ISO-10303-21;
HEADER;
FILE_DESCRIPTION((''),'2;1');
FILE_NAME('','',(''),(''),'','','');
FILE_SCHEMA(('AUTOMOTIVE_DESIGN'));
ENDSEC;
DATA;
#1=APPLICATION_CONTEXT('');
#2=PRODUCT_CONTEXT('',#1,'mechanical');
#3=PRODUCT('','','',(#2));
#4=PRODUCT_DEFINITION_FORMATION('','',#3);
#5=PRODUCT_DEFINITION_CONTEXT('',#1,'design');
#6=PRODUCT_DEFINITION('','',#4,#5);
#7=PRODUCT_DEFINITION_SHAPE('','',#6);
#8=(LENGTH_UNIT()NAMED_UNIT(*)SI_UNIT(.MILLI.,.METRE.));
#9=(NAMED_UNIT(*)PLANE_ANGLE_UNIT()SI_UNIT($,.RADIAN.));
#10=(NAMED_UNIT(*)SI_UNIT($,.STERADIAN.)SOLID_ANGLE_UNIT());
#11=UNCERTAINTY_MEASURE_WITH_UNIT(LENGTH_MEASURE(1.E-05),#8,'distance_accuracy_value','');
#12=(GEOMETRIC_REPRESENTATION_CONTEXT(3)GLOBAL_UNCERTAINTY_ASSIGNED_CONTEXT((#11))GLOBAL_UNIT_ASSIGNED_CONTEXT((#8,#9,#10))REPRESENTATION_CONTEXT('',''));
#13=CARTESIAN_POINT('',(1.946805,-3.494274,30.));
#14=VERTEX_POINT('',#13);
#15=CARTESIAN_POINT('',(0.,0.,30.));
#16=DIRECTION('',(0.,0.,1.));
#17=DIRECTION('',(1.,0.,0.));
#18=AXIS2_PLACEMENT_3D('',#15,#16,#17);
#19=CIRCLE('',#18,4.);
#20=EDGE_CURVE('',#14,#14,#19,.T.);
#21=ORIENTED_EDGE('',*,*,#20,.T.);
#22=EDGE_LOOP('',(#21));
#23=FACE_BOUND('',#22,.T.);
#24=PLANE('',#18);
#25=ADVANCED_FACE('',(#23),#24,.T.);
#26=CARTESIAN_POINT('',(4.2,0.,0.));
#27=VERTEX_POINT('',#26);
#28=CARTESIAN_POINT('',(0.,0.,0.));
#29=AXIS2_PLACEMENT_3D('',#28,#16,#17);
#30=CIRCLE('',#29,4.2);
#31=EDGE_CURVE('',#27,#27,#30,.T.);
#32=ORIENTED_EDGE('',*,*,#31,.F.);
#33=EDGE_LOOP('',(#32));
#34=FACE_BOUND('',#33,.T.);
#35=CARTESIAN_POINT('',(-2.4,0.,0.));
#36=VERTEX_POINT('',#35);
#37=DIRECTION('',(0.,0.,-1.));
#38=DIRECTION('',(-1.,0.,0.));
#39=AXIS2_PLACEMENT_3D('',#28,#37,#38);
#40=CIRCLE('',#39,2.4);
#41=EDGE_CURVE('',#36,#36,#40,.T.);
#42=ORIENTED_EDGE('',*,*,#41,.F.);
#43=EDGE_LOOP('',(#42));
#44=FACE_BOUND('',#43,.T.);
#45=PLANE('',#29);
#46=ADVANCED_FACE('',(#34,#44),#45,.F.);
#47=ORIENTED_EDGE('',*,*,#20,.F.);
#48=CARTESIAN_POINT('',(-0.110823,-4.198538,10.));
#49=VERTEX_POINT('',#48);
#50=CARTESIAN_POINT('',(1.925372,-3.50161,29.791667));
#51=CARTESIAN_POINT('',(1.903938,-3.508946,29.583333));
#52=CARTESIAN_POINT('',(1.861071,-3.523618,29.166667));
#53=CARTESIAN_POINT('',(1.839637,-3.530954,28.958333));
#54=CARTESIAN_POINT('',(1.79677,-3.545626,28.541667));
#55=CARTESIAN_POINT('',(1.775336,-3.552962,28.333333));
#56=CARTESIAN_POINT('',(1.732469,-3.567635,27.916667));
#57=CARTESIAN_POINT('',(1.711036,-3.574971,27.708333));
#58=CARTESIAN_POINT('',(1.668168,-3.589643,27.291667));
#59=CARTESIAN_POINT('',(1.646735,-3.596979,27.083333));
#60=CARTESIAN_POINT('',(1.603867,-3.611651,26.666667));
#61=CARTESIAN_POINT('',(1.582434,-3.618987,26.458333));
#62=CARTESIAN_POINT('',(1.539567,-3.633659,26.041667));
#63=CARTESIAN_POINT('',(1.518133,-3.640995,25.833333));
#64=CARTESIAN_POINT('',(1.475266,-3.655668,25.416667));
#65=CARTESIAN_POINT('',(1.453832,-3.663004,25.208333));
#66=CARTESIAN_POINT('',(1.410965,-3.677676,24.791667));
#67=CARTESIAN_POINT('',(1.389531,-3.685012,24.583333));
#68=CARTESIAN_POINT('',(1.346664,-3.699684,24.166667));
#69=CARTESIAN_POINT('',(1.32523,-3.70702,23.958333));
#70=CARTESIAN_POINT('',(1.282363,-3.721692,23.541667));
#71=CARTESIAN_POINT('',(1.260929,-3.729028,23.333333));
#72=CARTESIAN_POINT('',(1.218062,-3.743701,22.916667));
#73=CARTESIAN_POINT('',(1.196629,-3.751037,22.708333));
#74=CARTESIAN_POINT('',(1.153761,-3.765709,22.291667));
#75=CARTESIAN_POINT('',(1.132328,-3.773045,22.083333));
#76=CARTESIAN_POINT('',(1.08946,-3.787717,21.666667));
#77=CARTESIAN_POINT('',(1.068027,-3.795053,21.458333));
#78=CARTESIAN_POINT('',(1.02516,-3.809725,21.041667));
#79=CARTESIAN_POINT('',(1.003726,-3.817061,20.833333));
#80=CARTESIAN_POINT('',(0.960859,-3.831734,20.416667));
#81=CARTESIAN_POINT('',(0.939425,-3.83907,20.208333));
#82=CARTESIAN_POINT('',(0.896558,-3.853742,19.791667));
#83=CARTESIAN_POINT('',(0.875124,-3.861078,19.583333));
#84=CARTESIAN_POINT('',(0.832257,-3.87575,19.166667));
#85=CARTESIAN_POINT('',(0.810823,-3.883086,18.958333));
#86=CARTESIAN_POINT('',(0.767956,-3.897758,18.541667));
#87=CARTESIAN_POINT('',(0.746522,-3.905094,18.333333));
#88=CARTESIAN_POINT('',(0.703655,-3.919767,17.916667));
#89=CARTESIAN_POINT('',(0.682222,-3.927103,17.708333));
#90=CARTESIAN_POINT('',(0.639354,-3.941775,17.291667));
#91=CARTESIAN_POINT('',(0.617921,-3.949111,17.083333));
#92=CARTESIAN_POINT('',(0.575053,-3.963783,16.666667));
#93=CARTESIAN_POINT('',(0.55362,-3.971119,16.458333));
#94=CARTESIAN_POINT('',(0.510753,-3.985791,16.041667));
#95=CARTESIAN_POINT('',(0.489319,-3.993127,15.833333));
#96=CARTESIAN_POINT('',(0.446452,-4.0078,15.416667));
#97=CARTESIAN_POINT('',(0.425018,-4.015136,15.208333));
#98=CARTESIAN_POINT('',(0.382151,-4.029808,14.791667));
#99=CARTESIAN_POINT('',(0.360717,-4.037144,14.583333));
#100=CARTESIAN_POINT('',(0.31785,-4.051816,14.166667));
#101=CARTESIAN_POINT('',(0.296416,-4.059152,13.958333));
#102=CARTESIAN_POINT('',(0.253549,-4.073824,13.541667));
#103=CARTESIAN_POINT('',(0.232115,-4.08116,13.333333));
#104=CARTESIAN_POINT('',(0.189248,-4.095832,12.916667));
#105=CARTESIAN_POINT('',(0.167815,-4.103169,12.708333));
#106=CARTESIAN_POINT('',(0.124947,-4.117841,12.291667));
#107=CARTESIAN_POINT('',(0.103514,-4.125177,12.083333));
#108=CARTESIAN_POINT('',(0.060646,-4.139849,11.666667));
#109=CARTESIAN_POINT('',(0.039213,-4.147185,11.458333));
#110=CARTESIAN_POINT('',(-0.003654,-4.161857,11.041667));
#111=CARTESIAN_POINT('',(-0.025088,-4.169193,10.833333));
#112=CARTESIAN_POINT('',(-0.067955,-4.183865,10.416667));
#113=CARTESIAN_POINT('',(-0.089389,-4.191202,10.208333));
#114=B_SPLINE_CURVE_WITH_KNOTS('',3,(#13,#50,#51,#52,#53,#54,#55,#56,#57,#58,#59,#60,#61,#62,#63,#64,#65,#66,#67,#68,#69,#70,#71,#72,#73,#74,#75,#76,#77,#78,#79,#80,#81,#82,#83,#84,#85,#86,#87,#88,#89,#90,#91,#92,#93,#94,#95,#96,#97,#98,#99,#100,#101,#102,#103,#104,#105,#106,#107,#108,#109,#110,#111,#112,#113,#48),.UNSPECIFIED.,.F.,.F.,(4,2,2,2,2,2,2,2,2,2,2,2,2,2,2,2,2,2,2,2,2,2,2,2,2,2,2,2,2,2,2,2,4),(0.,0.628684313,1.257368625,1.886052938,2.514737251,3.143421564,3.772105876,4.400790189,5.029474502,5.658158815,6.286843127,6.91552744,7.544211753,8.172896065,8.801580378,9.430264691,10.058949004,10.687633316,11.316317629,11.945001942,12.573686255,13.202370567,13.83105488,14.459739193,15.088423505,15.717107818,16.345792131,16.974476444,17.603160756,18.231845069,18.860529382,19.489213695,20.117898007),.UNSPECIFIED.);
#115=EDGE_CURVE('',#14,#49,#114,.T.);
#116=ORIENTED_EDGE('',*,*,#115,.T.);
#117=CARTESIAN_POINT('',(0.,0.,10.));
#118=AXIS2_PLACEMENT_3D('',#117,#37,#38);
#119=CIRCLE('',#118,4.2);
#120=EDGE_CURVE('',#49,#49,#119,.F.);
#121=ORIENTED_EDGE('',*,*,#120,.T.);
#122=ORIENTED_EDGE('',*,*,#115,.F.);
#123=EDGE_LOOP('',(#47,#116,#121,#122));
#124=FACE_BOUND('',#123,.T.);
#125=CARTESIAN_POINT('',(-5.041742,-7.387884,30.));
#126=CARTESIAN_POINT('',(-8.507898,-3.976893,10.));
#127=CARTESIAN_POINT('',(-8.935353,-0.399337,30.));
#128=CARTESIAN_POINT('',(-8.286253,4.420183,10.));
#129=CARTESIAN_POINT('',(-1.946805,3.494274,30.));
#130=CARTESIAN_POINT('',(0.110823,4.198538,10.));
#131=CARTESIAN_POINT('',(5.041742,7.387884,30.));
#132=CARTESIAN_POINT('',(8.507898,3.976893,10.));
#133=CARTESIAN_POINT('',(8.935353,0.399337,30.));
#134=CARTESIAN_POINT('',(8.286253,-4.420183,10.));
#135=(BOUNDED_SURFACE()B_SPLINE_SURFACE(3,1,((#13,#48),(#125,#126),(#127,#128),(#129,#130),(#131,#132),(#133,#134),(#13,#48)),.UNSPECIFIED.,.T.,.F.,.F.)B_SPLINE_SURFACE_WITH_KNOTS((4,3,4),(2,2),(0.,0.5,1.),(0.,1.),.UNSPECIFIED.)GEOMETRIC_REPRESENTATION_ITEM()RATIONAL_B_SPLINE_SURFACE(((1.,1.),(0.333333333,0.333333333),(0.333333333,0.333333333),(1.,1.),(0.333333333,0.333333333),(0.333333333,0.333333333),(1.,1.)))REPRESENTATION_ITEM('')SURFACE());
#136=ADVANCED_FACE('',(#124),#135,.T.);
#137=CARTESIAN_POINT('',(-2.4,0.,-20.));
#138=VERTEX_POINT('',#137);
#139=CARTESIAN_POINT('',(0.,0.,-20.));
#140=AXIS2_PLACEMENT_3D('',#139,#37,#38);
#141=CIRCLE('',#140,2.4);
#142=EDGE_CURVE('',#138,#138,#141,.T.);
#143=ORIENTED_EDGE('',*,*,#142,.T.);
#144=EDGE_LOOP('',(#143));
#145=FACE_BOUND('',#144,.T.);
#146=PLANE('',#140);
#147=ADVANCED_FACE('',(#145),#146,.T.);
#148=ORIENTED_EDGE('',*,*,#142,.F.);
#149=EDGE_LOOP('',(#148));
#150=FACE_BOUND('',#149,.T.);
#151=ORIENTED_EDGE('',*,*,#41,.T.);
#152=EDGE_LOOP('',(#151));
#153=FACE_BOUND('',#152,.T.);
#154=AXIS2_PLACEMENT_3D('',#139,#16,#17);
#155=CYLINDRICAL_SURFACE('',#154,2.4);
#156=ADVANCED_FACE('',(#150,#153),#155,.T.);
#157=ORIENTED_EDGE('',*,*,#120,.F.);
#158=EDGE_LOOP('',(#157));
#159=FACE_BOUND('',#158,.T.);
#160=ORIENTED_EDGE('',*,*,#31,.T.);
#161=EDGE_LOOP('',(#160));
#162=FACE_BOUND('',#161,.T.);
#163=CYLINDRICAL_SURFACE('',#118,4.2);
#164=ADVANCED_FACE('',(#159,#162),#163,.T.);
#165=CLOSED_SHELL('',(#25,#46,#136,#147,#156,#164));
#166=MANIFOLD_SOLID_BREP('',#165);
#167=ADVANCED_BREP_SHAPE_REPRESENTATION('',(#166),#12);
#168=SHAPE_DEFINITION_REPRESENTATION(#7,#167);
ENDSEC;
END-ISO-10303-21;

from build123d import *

# Parameters (mm, degrees)
ESBO_O1_R                = 4.2
RESSALTO_EXTRUS_O1_DEPTH = 10
ESBO_O3_R                = 2.4
RESSALTO_EXTRUS_O2_DEPTH = 20


with BuildPart() as part:
    # Esboço1 → Ressalto-extrusão1 (new body)
    with BuildSketch(Plane.XY):
        Circle(ESBO_O1_R)
    extrude(amount=RESSALTO_EXTRUS_O1_DEPTH)

    # Loft1: read off the stored shape, not the designer's step
    # Loft1: loft between two sections, ruled curve by curve
    loft1_from = [
        Edge.make_bspline([(1.94680537, -3.494273723, 30), (-5.041742075, -7.387884464, 30), (-8.935352816, -0.399337018, 30), (-1.94680537, 3.494273723, 30), (5.041742075, 7.387884464, 30), (8.935352816, 0.399337018, 30), (1.94680537, -3.494273723, 30)], [0, 0, 0, 0, 0.5, 0.5, 0.5, 1, 1, 1, 1], 3, [1, 0.333333333, 0.333333333, 1, 0.333333333, 0.333333333, 1]),
    ]
    loft1_to = [
        Edge.make_bspline([(-0.110822525, -4.198537646, 10), (-8.507897818, -3.976892596, 10), (-8.286252768, 4.420182696, 10), (0.110822525, 4.198537646, 10), (8.507897818, 3.976892596, 10), (8.286252768, -4.420182696, 10), (-0.110822525, -4.198537646, 10)], [0, 0, 0, 0, 0.5, 0.5, 0.5, 1, 1, 1, 1], 3, [1, 0.333333333, 0.333333333, 1, 0.333333333, 0.333333333, 1]),
    ]
    loft1 = Solid(Shell([*[Face.make_surface_from_curves(loft1_from[k], loft1_to[k]) for k in range(1)], Face(Wire(loft1_from)), Face(Wire(loft1_to))]))
    add(loft1)

    # Esboço3 → Ressalto-extrusão2 (add)
    with BuildSketch(Plane(origin=(0, 0, 0), x_dir=(-1, 0, 0), z_dir=(0, 0, -1))):
        Circle(ESBO_O3_R)
    extrude(amount=RESSALTO_EXTRUS_O2_DEPTH)


solid = part.part
